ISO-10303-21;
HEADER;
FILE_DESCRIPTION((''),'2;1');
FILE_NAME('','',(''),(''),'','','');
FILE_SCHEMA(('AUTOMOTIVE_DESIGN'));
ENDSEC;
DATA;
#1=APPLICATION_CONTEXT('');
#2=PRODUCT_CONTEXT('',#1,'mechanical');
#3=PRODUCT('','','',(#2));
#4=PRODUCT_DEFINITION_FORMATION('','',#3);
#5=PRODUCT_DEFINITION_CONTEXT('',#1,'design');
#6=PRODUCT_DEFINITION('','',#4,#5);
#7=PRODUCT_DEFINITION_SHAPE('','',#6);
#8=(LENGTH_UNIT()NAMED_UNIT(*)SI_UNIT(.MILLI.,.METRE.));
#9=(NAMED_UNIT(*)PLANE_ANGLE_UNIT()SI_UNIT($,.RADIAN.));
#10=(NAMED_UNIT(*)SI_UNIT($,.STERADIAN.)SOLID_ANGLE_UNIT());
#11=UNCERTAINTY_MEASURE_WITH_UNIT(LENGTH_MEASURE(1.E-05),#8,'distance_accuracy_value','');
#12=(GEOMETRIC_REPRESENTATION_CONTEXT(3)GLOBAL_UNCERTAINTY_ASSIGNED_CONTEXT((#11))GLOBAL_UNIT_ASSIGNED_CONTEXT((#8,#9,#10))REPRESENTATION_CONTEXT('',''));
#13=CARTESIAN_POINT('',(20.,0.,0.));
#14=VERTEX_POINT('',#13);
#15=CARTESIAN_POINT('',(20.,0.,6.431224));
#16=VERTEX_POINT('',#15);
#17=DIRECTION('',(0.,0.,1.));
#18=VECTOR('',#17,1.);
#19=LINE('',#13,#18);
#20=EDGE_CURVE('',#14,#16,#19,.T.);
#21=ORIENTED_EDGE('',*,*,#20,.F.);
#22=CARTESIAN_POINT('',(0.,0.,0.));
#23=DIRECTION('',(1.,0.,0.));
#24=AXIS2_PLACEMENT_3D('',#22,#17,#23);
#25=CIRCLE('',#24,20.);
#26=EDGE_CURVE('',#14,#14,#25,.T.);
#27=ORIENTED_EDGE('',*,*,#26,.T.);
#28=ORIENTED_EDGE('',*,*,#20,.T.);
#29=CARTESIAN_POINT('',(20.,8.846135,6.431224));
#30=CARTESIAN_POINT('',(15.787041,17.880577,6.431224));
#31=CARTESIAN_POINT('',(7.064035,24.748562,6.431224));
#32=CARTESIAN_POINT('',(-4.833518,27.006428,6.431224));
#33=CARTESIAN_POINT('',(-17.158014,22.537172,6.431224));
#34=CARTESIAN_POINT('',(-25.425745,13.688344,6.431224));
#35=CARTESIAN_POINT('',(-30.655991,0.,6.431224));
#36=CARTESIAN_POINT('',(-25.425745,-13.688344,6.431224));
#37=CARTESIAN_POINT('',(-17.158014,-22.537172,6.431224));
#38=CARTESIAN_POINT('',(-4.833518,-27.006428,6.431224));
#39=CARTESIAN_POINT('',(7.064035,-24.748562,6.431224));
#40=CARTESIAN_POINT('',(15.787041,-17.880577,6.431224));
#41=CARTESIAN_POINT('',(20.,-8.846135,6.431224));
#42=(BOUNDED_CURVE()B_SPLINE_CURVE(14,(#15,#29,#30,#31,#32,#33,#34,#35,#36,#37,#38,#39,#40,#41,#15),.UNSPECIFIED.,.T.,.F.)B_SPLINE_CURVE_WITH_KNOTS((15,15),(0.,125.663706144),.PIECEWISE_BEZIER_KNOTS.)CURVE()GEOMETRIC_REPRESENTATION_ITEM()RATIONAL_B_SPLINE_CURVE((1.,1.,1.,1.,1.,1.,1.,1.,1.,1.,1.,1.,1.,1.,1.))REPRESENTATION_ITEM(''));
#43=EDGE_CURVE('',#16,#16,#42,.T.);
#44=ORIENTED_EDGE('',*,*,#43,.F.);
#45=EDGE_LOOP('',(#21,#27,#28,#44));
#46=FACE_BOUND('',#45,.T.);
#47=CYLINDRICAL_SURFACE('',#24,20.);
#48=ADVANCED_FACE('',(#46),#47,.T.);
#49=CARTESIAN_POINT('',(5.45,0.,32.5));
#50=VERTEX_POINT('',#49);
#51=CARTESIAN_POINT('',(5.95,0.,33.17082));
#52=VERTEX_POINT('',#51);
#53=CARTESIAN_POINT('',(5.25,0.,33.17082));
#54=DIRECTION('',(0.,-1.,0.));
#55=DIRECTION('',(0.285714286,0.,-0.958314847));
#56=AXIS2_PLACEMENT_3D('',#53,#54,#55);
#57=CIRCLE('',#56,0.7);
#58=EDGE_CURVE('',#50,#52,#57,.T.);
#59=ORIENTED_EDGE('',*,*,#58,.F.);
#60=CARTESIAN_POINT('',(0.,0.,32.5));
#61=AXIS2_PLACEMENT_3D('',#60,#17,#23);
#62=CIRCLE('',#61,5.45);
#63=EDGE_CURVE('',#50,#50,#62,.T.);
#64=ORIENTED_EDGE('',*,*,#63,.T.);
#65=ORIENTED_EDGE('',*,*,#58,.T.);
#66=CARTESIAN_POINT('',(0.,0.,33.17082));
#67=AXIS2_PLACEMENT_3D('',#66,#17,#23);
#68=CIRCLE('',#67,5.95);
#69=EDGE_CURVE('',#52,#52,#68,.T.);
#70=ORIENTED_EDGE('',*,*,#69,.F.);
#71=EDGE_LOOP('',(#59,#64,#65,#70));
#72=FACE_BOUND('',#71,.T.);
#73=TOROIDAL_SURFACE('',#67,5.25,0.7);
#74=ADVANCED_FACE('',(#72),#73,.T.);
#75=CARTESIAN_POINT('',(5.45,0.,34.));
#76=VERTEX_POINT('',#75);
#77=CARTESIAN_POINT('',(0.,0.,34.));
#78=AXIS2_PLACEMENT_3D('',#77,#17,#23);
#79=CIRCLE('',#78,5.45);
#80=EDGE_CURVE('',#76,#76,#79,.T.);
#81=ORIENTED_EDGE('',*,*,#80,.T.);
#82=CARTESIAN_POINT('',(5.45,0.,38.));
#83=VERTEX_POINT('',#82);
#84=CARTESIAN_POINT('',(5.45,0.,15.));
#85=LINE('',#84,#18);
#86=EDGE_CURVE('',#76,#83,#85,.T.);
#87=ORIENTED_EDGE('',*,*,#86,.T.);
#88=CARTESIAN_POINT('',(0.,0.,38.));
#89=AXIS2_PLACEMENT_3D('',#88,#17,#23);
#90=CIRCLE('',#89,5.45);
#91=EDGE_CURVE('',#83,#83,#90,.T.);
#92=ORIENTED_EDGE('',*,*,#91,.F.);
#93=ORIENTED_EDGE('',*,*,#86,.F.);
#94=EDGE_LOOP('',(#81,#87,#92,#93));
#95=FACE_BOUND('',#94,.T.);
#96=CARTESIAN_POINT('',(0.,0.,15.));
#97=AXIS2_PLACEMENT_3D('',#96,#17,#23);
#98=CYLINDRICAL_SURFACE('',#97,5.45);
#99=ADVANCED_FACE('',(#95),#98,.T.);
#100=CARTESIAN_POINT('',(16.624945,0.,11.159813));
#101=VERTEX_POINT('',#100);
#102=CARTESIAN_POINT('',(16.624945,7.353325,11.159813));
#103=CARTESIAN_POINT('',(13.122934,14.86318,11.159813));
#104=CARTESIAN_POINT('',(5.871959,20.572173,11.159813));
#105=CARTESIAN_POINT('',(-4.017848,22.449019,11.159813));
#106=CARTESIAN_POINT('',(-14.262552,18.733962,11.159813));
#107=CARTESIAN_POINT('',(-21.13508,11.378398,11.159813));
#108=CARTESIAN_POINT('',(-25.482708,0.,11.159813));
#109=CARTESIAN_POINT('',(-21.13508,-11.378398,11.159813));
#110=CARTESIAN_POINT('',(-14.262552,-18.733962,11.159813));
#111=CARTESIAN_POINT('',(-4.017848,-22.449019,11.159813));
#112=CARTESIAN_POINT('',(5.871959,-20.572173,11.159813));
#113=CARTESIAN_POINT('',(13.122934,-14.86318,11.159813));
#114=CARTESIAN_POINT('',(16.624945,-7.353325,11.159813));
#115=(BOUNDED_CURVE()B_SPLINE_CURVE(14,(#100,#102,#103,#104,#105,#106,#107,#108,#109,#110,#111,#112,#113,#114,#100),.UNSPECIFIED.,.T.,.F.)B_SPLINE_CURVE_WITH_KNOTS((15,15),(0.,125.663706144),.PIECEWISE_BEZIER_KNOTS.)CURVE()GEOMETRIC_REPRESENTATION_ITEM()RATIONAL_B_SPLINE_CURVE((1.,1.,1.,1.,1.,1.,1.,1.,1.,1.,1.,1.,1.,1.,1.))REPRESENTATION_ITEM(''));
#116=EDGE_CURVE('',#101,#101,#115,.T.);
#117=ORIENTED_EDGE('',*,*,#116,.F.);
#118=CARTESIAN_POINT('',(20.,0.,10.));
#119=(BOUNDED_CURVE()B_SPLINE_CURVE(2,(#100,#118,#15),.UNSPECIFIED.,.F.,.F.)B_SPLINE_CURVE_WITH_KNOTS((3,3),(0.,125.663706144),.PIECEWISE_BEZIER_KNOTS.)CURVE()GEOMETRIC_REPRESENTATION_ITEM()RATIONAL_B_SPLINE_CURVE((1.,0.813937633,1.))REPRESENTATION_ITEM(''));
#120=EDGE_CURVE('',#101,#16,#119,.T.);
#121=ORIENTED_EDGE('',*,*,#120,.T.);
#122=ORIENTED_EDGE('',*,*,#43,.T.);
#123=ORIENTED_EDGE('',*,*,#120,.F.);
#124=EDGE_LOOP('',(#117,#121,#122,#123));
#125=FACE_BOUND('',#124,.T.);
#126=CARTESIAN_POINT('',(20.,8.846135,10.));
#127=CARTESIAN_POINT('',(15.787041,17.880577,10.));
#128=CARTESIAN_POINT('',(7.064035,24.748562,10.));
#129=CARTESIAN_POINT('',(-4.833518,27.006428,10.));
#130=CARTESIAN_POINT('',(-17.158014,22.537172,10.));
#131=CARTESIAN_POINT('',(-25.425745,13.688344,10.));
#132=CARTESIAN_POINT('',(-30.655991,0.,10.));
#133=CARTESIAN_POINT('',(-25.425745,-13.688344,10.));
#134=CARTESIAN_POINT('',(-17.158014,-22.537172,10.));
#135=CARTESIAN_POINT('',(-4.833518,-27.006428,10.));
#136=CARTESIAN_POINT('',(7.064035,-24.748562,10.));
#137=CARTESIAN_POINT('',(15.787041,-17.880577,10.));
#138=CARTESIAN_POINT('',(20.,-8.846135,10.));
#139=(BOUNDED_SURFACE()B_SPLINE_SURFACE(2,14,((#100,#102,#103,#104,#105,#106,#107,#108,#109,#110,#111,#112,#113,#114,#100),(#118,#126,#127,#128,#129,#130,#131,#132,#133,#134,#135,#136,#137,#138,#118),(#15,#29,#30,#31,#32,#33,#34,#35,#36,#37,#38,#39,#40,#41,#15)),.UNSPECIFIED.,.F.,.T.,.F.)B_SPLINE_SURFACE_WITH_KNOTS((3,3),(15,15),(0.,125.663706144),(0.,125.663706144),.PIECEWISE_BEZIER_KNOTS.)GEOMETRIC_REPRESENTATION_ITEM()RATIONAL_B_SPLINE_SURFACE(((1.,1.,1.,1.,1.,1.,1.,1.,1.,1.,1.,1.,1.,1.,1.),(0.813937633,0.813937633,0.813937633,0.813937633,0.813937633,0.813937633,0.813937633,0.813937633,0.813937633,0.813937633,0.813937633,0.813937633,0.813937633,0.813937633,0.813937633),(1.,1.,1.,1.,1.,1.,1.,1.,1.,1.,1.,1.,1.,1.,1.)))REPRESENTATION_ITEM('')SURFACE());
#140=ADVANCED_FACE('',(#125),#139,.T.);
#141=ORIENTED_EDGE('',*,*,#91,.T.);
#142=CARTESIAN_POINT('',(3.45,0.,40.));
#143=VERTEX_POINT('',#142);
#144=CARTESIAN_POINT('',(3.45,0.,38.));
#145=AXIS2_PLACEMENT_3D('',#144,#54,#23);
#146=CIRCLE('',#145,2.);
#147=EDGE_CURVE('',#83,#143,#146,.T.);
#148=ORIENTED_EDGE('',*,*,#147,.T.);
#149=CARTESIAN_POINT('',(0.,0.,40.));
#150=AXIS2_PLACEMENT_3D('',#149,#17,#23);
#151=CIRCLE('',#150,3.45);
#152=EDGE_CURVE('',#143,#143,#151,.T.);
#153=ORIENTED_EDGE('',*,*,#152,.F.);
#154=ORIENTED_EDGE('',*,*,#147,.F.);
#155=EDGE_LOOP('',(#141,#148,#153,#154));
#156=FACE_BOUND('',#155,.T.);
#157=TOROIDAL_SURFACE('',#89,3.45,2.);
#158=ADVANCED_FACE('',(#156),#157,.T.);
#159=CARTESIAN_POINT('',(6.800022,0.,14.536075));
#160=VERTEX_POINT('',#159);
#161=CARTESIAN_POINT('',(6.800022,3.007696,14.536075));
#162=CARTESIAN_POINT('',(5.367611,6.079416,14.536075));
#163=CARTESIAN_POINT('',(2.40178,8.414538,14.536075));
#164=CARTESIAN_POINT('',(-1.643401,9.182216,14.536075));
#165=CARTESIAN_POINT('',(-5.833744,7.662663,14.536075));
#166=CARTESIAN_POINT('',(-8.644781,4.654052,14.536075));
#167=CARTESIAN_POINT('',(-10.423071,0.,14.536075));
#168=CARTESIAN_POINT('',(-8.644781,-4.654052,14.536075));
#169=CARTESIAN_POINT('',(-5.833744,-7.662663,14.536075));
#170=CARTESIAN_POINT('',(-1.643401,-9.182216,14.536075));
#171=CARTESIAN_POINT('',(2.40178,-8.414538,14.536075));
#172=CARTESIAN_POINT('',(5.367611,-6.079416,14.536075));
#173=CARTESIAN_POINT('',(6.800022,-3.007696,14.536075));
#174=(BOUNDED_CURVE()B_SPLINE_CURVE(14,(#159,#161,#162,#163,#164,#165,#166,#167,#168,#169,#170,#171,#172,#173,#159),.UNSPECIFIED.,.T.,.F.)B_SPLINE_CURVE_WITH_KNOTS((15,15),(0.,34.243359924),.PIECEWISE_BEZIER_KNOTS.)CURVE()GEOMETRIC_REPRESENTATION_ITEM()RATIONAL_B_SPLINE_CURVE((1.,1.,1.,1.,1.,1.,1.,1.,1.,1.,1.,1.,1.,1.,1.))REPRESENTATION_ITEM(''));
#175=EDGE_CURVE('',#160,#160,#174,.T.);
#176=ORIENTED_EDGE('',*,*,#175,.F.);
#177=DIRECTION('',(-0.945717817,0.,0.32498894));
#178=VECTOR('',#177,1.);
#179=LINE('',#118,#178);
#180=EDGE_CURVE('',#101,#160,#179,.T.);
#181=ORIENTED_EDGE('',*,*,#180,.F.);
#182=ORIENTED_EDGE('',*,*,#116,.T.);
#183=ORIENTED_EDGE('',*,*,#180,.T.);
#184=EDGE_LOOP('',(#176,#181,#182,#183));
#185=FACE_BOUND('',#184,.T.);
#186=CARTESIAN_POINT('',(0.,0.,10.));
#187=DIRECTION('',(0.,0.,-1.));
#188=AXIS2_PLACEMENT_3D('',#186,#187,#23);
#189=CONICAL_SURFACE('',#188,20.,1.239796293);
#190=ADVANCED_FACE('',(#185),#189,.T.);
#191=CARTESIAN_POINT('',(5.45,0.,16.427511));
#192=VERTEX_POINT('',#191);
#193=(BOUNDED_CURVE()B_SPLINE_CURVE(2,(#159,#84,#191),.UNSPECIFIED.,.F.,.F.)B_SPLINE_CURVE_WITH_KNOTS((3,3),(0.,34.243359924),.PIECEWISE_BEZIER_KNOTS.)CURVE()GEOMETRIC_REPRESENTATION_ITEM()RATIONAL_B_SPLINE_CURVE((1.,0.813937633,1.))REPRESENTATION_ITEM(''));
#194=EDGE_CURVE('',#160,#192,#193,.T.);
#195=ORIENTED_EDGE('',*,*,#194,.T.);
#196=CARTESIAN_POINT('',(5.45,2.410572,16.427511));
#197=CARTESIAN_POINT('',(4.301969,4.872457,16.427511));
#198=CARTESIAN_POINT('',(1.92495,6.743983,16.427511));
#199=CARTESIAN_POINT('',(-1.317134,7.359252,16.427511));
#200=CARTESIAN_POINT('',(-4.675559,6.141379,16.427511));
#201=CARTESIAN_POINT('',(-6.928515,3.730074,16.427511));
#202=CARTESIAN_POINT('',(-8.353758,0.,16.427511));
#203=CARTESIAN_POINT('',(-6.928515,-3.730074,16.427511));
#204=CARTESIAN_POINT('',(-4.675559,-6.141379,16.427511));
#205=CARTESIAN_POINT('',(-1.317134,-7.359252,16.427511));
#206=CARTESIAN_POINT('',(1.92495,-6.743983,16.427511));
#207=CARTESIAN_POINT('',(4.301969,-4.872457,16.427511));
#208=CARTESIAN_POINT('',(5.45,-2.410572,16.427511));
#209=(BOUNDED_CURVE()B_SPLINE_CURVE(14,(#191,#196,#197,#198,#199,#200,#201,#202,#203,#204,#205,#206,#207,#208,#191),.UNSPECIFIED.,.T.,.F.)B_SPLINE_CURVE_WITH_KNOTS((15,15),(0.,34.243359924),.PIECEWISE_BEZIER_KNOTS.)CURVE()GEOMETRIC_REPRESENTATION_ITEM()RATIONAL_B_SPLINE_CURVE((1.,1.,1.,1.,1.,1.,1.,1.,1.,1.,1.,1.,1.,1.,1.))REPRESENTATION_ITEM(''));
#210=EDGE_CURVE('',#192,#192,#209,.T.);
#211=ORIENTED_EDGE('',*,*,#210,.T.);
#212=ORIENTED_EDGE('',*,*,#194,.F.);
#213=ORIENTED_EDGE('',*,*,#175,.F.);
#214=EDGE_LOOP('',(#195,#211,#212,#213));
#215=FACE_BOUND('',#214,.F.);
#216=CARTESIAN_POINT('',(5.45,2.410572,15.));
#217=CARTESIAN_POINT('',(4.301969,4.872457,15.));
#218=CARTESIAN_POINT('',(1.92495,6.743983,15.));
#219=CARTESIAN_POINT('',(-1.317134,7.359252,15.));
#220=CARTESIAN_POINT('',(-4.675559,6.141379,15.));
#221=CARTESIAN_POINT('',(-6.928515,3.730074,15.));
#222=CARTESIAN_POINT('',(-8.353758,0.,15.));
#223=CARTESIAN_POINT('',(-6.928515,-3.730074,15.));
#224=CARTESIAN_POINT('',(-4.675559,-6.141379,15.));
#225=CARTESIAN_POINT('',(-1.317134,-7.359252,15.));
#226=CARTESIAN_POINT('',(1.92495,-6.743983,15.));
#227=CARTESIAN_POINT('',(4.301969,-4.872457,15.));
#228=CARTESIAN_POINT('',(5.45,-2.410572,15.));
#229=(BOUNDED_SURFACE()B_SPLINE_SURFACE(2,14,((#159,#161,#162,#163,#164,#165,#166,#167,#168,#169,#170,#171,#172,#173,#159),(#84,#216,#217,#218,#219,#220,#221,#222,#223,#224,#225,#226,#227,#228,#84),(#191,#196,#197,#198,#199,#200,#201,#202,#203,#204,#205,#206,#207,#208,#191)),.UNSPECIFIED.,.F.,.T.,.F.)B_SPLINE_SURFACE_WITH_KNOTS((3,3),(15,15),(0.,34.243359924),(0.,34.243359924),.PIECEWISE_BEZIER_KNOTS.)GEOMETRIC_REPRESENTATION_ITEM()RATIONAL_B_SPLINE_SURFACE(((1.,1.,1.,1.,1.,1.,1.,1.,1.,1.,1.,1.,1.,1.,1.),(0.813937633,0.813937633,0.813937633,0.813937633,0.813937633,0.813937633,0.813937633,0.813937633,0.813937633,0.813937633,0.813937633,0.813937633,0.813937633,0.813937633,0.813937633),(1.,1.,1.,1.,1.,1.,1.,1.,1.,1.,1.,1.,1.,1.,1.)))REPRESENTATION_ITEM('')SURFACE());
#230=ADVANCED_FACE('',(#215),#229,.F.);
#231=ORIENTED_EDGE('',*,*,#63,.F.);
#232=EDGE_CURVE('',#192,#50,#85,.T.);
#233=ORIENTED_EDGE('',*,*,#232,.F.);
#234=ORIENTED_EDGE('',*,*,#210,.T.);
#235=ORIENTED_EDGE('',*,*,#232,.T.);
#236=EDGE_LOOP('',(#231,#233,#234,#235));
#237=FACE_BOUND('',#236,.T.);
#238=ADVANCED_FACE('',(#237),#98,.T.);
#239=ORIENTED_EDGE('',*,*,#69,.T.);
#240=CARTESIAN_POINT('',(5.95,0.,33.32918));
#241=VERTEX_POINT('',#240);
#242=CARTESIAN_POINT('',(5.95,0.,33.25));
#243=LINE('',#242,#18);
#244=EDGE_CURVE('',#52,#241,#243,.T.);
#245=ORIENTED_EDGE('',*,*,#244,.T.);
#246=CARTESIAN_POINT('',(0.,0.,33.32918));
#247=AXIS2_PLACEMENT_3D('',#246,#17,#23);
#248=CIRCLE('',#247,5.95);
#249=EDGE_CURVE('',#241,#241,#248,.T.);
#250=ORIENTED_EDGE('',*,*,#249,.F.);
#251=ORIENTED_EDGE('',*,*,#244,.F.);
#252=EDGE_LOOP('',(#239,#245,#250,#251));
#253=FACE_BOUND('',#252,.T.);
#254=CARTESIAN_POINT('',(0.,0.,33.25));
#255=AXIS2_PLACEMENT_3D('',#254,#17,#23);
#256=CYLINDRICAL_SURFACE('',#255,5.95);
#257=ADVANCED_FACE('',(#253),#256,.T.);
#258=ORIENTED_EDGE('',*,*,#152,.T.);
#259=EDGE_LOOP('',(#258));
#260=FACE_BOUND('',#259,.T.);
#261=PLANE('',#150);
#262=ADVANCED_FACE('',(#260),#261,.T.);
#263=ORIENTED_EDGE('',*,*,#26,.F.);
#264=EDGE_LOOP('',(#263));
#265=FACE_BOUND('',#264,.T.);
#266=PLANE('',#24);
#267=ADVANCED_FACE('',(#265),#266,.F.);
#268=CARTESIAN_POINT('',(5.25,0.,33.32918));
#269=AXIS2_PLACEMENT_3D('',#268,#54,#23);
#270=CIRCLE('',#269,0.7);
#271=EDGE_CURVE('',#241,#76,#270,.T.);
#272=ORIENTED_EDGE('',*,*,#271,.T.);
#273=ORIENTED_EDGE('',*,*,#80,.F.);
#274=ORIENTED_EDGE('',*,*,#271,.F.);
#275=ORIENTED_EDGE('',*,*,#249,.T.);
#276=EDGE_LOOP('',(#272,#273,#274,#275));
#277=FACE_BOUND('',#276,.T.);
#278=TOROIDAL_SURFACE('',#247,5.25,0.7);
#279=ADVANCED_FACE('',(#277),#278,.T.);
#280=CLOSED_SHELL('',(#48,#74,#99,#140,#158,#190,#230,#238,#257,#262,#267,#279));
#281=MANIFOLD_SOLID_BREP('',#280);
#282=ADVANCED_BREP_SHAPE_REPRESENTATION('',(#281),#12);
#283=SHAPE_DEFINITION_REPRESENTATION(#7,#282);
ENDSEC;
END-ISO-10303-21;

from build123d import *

# Parameters (mm, degrees)
F0_W = 0.5
F0_H = 1.5
F2_R = 2
F3_R = 5


# Not quite as in the source:
# - a fillet or chamfer that OpenCascade refuses, or shapes differently, is made with other operations: its cross-section is extruded or revolved along the edge and cut away or added


with BuildPart() as f1:
    # F0 (on Front) → F1 (revolve)
    with BuildSketch(Plane.XZ):
        Polygon((0, 40), (0, 0), (20, 0), (20, 10), (5.45, 15), (5.45, 32.5), (5.45, 34), (5.45, 40), align=None)
        with Locations((5.7, 33.25)):
            Rectangle(F0_W, F0_H)
    revolve(axis=Axis((0, 0, 20), (0, 0, 1)))

    # F2
    f2_edges = [f1.edges().sort_by_distance(p)[0] for p in [
        (-5.45, 0, 40),
        (-5.45, 0, 15),
    ]]
    fillet(f2_edges, radius=F2_R)

    # F3
    f3_edges = [f1.edges().sort_by_distance(p)[0] for p in [
        (-20, 0, 10),
    ]]
    fillet(f3_edges, radius=F3_R)

    # F4: fillet of radius 0.7 on 3 edges, made by hand

    # F4_s1 → F4_t2 (revolve, cut)
    with BuildSketch(Plane.XZ):
        with BuildLine():
            ThreePointArc((5.45, 32.5), (5.811248608, 32.75249038), (5.95, 33.1708203932))
            Line((5.95, 33.1708203932), (5.95, 32.5))
            Line((5.95, 32.5), (5.45, 32.5))
        make_face()
    revolve(axis=Axis((0, 0, 32.5), (0, 0, 1)), mode=Mode.SUBTRACT)

    # F4_s3 → F4_t4 (revolve, cut)
    with BuildSketch(Plane.XZ):
        with BuildLine():
            ThreePointArc((5.95, 33.3291796068), (5.811248608, 33.74750962), (5.45, 34))
            Line((5.45, 34), (5.95, 34))
            Line((5.95, 34), (5.95, 33.3291796068))
        make_face()
    revolve(axis=Axis((0, 0, 34), (0, 0, 1)), mode=Mode.SUBTRACT)


solid = f1.part
